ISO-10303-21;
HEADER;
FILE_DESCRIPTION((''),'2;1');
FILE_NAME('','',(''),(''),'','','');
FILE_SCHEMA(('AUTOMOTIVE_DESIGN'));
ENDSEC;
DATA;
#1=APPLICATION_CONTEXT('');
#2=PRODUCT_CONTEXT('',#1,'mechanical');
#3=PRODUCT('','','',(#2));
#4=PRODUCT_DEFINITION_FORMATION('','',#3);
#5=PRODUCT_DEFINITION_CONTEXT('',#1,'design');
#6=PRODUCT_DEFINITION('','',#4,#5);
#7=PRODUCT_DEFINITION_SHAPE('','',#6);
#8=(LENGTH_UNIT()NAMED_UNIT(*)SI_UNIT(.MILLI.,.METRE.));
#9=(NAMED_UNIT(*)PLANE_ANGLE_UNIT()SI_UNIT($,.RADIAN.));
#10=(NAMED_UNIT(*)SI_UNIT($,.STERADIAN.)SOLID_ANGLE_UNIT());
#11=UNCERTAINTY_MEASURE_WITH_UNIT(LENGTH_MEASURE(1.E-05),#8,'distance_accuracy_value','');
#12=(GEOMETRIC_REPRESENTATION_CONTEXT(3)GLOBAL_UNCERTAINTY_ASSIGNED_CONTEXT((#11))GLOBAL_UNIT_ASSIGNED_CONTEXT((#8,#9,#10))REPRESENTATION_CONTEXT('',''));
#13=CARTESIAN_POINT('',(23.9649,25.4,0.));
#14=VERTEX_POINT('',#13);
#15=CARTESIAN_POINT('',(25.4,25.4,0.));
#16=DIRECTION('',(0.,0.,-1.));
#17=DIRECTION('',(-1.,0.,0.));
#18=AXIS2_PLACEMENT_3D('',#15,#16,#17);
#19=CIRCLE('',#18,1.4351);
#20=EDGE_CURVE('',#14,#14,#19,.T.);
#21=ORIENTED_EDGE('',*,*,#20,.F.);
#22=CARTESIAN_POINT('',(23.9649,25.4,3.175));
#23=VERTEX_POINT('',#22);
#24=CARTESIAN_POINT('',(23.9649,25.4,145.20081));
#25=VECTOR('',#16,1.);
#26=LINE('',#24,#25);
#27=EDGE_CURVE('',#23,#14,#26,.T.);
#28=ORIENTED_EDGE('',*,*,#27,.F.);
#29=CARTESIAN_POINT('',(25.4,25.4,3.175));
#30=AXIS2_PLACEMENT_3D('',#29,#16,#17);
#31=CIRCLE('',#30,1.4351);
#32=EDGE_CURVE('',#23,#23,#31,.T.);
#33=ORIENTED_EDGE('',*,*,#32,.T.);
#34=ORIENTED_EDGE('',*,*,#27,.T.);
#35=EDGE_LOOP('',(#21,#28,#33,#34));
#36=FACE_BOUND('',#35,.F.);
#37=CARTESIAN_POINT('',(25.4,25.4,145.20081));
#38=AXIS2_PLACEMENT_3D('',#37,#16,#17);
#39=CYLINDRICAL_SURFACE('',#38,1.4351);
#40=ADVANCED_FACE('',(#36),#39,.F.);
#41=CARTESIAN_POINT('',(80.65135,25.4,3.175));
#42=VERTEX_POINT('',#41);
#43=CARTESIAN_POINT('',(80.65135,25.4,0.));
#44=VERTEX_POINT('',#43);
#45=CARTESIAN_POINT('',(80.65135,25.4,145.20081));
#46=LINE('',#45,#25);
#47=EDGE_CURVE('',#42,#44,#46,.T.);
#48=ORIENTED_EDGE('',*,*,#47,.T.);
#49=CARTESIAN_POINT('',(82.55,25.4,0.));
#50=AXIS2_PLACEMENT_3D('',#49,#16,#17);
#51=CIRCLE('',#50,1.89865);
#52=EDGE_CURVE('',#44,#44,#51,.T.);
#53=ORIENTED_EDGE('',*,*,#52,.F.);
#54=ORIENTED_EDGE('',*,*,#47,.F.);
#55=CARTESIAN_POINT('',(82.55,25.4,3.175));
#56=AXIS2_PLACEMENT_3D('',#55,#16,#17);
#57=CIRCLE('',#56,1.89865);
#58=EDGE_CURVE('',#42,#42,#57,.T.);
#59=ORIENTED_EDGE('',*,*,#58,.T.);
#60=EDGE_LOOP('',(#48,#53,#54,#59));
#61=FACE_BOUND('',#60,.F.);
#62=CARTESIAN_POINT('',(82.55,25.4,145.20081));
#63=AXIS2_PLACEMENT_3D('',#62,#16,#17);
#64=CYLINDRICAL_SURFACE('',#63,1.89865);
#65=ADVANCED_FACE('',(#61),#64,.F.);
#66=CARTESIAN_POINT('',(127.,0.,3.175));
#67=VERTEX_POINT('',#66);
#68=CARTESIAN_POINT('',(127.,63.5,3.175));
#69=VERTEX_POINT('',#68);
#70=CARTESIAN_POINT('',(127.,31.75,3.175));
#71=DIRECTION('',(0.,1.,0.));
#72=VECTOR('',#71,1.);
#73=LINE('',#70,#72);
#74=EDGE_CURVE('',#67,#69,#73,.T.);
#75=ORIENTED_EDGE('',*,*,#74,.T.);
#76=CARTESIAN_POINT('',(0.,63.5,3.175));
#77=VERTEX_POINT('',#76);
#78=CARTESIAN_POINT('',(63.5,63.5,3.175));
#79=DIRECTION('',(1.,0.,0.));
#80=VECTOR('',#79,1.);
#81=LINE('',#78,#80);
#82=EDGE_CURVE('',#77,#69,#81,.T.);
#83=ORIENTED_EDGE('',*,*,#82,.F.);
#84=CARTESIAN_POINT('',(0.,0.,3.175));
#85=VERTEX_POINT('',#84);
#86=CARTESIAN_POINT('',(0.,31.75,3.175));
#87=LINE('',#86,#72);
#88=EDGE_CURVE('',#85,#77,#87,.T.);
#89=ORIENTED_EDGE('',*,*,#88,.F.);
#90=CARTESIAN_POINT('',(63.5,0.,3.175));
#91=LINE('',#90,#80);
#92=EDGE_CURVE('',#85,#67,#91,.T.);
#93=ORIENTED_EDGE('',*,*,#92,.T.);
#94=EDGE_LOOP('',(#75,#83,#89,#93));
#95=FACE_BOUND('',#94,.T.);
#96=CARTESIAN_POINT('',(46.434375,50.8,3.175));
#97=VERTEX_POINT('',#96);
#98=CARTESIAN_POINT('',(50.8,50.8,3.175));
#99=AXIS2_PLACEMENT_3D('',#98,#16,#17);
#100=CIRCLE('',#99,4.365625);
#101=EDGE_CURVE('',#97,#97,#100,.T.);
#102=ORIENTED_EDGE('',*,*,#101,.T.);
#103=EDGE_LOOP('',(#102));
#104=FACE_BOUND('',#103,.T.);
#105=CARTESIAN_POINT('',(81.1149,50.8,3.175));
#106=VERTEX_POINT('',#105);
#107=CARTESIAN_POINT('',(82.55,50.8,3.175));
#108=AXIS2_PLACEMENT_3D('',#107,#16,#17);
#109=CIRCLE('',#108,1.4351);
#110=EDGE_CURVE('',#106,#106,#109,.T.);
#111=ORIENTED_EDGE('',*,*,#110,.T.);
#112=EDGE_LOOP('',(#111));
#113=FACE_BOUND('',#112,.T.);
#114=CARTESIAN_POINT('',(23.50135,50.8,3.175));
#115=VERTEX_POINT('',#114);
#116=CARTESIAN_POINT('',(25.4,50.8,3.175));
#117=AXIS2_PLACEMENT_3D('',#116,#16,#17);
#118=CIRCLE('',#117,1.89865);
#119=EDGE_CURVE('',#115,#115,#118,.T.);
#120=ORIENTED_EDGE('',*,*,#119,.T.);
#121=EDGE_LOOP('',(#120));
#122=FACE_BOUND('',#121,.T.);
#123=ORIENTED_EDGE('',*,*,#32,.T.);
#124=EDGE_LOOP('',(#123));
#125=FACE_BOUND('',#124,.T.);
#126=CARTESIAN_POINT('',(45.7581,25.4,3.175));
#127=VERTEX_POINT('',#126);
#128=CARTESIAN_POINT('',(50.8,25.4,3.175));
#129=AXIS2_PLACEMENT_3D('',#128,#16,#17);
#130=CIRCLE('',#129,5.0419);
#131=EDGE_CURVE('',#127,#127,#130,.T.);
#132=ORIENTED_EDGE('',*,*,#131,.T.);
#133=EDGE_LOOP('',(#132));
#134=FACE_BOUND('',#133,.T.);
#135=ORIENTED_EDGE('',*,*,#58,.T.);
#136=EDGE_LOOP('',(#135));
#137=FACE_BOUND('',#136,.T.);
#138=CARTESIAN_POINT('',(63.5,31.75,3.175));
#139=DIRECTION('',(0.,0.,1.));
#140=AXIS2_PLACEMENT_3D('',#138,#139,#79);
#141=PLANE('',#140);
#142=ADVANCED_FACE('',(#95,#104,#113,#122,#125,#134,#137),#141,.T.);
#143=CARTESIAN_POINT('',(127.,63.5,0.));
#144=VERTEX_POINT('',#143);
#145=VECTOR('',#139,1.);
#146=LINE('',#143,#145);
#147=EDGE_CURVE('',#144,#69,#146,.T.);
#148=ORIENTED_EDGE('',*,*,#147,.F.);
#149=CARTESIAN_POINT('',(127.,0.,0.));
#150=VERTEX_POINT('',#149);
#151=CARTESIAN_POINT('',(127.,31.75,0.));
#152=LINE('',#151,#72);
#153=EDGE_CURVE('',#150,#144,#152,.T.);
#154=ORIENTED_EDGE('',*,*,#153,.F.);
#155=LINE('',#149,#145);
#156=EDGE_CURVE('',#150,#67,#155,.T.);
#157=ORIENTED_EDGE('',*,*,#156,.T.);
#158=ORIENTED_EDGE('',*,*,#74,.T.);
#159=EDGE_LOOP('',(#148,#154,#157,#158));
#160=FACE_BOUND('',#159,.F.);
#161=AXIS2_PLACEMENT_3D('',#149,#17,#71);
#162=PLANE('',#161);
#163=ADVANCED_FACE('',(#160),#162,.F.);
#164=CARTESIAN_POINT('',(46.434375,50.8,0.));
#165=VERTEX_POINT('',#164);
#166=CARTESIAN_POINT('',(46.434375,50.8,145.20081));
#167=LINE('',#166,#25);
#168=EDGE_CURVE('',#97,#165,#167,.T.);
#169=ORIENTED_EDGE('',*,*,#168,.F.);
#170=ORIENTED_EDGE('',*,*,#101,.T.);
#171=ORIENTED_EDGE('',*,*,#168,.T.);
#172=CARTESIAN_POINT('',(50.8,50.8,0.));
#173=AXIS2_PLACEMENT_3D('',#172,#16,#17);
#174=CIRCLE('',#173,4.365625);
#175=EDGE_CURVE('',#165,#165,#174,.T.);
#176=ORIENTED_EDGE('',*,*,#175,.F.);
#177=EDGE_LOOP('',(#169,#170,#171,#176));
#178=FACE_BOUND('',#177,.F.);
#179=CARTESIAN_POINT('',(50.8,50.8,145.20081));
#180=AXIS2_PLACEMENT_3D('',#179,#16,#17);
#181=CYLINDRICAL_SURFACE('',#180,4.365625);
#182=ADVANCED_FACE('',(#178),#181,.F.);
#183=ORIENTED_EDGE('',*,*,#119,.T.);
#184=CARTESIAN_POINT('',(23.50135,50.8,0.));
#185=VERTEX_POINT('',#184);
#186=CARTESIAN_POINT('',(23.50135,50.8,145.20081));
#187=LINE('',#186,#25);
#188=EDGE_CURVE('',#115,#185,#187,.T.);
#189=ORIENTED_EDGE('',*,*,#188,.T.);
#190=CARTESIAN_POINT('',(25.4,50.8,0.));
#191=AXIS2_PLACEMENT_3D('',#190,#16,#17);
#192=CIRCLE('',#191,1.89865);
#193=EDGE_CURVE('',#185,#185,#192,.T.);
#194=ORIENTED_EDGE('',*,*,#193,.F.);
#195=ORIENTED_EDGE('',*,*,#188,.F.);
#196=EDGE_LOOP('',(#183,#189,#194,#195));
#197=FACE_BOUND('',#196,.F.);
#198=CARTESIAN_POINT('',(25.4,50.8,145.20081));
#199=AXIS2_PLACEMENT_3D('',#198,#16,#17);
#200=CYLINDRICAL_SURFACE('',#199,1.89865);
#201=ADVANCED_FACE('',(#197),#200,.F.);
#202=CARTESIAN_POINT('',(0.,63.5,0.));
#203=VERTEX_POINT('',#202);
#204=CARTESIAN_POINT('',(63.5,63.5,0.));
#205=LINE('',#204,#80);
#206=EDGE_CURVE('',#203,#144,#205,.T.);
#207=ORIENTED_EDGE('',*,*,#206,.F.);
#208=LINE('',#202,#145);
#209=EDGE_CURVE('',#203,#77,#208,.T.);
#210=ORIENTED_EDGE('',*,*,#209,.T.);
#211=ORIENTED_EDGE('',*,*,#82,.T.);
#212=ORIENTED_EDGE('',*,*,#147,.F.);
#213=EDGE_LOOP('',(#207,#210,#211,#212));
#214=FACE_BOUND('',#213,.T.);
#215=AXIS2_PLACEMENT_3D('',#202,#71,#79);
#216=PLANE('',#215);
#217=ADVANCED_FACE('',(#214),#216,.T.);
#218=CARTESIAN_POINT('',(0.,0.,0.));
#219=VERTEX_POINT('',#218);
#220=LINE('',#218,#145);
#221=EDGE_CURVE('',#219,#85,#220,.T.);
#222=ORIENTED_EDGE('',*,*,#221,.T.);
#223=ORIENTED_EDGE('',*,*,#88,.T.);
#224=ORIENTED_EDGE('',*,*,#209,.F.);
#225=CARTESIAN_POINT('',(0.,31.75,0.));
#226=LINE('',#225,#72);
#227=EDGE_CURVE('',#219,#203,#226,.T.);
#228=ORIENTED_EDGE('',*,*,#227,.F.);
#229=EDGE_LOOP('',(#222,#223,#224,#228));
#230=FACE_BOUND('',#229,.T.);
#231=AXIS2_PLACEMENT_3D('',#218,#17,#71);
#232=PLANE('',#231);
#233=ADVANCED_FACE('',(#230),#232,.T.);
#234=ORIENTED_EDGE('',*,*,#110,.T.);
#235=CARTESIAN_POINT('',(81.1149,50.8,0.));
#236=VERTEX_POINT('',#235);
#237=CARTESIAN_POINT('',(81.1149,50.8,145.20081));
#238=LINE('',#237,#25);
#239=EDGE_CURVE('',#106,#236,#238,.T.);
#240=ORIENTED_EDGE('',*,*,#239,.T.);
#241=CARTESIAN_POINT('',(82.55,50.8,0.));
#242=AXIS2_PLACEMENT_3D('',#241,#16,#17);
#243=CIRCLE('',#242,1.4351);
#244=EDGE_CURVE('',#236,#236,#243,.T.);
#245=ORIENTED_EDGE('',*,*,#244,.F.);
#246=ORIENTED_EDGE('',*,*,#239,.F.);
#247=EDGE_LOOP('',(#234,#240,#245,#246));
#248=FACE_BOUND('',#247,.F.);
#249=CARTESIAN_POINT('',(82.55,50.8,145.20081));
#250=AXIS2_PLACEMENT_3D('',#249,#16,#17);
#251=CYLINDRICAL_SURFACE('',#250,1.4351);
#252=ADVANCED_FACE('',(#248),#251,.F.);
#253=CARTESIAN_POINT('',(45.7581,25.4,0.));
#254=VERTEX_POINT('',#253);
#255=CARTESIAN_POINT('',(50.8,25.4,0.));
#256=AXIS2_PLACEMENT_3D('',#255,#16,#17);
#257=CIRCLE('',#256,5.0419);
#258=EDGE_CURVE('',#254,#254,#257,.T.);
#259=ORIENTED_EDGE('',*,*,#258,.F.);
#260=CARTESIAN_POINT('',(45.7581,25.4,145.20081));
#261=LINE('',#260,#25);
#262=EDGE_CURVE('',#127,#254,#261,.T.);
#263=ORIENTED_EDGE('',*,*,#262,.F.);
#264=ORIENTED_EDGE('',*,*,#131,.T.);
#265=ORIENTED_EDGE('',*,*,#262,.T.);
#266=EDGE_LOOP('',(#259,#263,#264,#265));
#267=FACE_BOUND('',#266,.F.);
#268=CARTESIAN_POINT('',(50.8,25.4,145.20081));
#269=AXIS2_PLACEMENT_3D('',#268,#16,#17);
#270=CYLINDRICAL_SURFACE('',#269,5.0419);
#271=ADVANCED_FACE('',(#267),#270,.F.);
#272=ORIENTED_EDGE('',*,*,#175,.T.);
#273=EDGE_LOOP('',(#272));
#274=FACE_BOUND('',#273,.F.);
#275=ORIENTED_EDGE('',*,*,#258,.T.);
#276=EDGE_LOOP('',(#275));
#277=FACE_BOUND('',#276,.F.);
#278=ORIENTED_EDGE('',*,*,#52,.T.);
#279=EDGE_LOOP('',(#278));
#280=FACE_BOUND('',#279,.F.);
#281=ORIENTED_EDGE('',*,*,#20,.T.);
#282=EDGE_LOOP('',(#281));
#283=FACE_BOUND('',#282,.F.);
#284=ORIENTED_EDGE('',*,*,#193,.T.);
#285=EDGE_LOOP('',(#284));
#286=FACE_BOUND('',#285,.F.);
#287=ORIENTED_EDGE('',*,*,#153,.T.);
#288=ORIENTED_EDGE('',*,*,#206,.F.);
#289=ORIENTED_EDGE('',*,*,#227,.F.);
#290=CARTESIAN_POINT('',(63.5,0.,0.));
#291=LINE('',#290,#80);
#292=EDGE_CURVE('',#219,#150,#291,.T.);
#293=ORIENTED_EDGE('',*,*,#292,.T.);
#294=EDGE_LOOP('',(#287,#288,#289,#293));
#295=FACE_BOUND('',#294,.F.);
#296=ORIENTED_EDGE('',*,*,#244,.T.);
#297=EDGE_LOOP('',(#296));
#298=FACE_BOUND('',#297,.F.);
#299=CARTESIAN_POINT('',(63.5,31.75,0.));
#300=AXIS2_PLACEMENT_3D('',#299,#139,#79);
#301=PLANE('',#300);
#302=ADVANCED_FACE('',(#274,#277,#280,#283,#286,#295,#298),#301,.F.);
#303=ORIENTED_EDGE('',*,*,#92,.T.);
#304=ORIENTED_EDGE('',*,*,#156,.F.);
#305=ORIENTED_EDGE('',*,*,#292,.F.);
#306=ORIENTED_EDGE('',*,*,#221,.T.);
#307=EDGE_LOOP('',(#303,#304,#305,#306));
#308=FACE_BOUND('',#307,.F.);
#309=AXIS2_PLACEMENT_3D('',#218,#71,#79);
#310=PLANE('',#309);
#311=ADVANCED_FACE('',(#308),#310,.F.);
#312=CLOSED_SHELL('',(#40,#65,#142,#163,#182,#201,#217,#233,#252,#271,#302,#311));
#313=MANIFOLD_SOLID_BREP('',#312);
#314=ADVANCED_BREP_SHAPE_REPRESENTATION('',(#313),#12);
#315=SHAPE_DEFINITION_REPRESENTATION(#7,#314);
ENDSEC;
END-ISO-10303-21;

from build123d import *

# Parameters (mm, degrees)
F0_W     = 127
F0_H     = 63.5
F1_DEPTH = 3.175
F3_D     = 3.7973
F4_D     = 2.8702
F5_D     = 8.73125
F6_D     = 10.0838


# Not quite as in the source:
# - a length typed as a fraction of an inch, garbled in the dataset ("3 / 203.2 mm" for 3/8 in), is restored


with BuildPart() as f1:
    # F0 (on Top) → F1 (new body)
    with BuildSketch(Plane.XY):
        with Locations((63.5, 31.75)):
            Rectangle(F0_W, F0_H)
    extrude(amount=F1_DEPTH)

    # F3 (through all)
    with Locations(Plane.XY.offset(3.175)):
        with Locations((25.4, 50.8), (82.55, 25.4)):
            Hole(F3_D / 2)

    # F4 (through all)
    with Locations(Plane.XY.offset(3.175)):
        with Locations((25.4, 25.4), (82.55, 50.8)):
            Hole(F4_D / 2)

    # F5 (through all)
    with Locations(Plane.XY.offset(3.175)):
        with Locations((50.8, 50.8)):
            Hole(F5_D / 2)

    # F6 (through all)
    with Locations(Plane.XY.offset(3.175)):
        with Locations((50.8, 25.4)):
            Hole(F6_D / 2)


solid = f1.part
